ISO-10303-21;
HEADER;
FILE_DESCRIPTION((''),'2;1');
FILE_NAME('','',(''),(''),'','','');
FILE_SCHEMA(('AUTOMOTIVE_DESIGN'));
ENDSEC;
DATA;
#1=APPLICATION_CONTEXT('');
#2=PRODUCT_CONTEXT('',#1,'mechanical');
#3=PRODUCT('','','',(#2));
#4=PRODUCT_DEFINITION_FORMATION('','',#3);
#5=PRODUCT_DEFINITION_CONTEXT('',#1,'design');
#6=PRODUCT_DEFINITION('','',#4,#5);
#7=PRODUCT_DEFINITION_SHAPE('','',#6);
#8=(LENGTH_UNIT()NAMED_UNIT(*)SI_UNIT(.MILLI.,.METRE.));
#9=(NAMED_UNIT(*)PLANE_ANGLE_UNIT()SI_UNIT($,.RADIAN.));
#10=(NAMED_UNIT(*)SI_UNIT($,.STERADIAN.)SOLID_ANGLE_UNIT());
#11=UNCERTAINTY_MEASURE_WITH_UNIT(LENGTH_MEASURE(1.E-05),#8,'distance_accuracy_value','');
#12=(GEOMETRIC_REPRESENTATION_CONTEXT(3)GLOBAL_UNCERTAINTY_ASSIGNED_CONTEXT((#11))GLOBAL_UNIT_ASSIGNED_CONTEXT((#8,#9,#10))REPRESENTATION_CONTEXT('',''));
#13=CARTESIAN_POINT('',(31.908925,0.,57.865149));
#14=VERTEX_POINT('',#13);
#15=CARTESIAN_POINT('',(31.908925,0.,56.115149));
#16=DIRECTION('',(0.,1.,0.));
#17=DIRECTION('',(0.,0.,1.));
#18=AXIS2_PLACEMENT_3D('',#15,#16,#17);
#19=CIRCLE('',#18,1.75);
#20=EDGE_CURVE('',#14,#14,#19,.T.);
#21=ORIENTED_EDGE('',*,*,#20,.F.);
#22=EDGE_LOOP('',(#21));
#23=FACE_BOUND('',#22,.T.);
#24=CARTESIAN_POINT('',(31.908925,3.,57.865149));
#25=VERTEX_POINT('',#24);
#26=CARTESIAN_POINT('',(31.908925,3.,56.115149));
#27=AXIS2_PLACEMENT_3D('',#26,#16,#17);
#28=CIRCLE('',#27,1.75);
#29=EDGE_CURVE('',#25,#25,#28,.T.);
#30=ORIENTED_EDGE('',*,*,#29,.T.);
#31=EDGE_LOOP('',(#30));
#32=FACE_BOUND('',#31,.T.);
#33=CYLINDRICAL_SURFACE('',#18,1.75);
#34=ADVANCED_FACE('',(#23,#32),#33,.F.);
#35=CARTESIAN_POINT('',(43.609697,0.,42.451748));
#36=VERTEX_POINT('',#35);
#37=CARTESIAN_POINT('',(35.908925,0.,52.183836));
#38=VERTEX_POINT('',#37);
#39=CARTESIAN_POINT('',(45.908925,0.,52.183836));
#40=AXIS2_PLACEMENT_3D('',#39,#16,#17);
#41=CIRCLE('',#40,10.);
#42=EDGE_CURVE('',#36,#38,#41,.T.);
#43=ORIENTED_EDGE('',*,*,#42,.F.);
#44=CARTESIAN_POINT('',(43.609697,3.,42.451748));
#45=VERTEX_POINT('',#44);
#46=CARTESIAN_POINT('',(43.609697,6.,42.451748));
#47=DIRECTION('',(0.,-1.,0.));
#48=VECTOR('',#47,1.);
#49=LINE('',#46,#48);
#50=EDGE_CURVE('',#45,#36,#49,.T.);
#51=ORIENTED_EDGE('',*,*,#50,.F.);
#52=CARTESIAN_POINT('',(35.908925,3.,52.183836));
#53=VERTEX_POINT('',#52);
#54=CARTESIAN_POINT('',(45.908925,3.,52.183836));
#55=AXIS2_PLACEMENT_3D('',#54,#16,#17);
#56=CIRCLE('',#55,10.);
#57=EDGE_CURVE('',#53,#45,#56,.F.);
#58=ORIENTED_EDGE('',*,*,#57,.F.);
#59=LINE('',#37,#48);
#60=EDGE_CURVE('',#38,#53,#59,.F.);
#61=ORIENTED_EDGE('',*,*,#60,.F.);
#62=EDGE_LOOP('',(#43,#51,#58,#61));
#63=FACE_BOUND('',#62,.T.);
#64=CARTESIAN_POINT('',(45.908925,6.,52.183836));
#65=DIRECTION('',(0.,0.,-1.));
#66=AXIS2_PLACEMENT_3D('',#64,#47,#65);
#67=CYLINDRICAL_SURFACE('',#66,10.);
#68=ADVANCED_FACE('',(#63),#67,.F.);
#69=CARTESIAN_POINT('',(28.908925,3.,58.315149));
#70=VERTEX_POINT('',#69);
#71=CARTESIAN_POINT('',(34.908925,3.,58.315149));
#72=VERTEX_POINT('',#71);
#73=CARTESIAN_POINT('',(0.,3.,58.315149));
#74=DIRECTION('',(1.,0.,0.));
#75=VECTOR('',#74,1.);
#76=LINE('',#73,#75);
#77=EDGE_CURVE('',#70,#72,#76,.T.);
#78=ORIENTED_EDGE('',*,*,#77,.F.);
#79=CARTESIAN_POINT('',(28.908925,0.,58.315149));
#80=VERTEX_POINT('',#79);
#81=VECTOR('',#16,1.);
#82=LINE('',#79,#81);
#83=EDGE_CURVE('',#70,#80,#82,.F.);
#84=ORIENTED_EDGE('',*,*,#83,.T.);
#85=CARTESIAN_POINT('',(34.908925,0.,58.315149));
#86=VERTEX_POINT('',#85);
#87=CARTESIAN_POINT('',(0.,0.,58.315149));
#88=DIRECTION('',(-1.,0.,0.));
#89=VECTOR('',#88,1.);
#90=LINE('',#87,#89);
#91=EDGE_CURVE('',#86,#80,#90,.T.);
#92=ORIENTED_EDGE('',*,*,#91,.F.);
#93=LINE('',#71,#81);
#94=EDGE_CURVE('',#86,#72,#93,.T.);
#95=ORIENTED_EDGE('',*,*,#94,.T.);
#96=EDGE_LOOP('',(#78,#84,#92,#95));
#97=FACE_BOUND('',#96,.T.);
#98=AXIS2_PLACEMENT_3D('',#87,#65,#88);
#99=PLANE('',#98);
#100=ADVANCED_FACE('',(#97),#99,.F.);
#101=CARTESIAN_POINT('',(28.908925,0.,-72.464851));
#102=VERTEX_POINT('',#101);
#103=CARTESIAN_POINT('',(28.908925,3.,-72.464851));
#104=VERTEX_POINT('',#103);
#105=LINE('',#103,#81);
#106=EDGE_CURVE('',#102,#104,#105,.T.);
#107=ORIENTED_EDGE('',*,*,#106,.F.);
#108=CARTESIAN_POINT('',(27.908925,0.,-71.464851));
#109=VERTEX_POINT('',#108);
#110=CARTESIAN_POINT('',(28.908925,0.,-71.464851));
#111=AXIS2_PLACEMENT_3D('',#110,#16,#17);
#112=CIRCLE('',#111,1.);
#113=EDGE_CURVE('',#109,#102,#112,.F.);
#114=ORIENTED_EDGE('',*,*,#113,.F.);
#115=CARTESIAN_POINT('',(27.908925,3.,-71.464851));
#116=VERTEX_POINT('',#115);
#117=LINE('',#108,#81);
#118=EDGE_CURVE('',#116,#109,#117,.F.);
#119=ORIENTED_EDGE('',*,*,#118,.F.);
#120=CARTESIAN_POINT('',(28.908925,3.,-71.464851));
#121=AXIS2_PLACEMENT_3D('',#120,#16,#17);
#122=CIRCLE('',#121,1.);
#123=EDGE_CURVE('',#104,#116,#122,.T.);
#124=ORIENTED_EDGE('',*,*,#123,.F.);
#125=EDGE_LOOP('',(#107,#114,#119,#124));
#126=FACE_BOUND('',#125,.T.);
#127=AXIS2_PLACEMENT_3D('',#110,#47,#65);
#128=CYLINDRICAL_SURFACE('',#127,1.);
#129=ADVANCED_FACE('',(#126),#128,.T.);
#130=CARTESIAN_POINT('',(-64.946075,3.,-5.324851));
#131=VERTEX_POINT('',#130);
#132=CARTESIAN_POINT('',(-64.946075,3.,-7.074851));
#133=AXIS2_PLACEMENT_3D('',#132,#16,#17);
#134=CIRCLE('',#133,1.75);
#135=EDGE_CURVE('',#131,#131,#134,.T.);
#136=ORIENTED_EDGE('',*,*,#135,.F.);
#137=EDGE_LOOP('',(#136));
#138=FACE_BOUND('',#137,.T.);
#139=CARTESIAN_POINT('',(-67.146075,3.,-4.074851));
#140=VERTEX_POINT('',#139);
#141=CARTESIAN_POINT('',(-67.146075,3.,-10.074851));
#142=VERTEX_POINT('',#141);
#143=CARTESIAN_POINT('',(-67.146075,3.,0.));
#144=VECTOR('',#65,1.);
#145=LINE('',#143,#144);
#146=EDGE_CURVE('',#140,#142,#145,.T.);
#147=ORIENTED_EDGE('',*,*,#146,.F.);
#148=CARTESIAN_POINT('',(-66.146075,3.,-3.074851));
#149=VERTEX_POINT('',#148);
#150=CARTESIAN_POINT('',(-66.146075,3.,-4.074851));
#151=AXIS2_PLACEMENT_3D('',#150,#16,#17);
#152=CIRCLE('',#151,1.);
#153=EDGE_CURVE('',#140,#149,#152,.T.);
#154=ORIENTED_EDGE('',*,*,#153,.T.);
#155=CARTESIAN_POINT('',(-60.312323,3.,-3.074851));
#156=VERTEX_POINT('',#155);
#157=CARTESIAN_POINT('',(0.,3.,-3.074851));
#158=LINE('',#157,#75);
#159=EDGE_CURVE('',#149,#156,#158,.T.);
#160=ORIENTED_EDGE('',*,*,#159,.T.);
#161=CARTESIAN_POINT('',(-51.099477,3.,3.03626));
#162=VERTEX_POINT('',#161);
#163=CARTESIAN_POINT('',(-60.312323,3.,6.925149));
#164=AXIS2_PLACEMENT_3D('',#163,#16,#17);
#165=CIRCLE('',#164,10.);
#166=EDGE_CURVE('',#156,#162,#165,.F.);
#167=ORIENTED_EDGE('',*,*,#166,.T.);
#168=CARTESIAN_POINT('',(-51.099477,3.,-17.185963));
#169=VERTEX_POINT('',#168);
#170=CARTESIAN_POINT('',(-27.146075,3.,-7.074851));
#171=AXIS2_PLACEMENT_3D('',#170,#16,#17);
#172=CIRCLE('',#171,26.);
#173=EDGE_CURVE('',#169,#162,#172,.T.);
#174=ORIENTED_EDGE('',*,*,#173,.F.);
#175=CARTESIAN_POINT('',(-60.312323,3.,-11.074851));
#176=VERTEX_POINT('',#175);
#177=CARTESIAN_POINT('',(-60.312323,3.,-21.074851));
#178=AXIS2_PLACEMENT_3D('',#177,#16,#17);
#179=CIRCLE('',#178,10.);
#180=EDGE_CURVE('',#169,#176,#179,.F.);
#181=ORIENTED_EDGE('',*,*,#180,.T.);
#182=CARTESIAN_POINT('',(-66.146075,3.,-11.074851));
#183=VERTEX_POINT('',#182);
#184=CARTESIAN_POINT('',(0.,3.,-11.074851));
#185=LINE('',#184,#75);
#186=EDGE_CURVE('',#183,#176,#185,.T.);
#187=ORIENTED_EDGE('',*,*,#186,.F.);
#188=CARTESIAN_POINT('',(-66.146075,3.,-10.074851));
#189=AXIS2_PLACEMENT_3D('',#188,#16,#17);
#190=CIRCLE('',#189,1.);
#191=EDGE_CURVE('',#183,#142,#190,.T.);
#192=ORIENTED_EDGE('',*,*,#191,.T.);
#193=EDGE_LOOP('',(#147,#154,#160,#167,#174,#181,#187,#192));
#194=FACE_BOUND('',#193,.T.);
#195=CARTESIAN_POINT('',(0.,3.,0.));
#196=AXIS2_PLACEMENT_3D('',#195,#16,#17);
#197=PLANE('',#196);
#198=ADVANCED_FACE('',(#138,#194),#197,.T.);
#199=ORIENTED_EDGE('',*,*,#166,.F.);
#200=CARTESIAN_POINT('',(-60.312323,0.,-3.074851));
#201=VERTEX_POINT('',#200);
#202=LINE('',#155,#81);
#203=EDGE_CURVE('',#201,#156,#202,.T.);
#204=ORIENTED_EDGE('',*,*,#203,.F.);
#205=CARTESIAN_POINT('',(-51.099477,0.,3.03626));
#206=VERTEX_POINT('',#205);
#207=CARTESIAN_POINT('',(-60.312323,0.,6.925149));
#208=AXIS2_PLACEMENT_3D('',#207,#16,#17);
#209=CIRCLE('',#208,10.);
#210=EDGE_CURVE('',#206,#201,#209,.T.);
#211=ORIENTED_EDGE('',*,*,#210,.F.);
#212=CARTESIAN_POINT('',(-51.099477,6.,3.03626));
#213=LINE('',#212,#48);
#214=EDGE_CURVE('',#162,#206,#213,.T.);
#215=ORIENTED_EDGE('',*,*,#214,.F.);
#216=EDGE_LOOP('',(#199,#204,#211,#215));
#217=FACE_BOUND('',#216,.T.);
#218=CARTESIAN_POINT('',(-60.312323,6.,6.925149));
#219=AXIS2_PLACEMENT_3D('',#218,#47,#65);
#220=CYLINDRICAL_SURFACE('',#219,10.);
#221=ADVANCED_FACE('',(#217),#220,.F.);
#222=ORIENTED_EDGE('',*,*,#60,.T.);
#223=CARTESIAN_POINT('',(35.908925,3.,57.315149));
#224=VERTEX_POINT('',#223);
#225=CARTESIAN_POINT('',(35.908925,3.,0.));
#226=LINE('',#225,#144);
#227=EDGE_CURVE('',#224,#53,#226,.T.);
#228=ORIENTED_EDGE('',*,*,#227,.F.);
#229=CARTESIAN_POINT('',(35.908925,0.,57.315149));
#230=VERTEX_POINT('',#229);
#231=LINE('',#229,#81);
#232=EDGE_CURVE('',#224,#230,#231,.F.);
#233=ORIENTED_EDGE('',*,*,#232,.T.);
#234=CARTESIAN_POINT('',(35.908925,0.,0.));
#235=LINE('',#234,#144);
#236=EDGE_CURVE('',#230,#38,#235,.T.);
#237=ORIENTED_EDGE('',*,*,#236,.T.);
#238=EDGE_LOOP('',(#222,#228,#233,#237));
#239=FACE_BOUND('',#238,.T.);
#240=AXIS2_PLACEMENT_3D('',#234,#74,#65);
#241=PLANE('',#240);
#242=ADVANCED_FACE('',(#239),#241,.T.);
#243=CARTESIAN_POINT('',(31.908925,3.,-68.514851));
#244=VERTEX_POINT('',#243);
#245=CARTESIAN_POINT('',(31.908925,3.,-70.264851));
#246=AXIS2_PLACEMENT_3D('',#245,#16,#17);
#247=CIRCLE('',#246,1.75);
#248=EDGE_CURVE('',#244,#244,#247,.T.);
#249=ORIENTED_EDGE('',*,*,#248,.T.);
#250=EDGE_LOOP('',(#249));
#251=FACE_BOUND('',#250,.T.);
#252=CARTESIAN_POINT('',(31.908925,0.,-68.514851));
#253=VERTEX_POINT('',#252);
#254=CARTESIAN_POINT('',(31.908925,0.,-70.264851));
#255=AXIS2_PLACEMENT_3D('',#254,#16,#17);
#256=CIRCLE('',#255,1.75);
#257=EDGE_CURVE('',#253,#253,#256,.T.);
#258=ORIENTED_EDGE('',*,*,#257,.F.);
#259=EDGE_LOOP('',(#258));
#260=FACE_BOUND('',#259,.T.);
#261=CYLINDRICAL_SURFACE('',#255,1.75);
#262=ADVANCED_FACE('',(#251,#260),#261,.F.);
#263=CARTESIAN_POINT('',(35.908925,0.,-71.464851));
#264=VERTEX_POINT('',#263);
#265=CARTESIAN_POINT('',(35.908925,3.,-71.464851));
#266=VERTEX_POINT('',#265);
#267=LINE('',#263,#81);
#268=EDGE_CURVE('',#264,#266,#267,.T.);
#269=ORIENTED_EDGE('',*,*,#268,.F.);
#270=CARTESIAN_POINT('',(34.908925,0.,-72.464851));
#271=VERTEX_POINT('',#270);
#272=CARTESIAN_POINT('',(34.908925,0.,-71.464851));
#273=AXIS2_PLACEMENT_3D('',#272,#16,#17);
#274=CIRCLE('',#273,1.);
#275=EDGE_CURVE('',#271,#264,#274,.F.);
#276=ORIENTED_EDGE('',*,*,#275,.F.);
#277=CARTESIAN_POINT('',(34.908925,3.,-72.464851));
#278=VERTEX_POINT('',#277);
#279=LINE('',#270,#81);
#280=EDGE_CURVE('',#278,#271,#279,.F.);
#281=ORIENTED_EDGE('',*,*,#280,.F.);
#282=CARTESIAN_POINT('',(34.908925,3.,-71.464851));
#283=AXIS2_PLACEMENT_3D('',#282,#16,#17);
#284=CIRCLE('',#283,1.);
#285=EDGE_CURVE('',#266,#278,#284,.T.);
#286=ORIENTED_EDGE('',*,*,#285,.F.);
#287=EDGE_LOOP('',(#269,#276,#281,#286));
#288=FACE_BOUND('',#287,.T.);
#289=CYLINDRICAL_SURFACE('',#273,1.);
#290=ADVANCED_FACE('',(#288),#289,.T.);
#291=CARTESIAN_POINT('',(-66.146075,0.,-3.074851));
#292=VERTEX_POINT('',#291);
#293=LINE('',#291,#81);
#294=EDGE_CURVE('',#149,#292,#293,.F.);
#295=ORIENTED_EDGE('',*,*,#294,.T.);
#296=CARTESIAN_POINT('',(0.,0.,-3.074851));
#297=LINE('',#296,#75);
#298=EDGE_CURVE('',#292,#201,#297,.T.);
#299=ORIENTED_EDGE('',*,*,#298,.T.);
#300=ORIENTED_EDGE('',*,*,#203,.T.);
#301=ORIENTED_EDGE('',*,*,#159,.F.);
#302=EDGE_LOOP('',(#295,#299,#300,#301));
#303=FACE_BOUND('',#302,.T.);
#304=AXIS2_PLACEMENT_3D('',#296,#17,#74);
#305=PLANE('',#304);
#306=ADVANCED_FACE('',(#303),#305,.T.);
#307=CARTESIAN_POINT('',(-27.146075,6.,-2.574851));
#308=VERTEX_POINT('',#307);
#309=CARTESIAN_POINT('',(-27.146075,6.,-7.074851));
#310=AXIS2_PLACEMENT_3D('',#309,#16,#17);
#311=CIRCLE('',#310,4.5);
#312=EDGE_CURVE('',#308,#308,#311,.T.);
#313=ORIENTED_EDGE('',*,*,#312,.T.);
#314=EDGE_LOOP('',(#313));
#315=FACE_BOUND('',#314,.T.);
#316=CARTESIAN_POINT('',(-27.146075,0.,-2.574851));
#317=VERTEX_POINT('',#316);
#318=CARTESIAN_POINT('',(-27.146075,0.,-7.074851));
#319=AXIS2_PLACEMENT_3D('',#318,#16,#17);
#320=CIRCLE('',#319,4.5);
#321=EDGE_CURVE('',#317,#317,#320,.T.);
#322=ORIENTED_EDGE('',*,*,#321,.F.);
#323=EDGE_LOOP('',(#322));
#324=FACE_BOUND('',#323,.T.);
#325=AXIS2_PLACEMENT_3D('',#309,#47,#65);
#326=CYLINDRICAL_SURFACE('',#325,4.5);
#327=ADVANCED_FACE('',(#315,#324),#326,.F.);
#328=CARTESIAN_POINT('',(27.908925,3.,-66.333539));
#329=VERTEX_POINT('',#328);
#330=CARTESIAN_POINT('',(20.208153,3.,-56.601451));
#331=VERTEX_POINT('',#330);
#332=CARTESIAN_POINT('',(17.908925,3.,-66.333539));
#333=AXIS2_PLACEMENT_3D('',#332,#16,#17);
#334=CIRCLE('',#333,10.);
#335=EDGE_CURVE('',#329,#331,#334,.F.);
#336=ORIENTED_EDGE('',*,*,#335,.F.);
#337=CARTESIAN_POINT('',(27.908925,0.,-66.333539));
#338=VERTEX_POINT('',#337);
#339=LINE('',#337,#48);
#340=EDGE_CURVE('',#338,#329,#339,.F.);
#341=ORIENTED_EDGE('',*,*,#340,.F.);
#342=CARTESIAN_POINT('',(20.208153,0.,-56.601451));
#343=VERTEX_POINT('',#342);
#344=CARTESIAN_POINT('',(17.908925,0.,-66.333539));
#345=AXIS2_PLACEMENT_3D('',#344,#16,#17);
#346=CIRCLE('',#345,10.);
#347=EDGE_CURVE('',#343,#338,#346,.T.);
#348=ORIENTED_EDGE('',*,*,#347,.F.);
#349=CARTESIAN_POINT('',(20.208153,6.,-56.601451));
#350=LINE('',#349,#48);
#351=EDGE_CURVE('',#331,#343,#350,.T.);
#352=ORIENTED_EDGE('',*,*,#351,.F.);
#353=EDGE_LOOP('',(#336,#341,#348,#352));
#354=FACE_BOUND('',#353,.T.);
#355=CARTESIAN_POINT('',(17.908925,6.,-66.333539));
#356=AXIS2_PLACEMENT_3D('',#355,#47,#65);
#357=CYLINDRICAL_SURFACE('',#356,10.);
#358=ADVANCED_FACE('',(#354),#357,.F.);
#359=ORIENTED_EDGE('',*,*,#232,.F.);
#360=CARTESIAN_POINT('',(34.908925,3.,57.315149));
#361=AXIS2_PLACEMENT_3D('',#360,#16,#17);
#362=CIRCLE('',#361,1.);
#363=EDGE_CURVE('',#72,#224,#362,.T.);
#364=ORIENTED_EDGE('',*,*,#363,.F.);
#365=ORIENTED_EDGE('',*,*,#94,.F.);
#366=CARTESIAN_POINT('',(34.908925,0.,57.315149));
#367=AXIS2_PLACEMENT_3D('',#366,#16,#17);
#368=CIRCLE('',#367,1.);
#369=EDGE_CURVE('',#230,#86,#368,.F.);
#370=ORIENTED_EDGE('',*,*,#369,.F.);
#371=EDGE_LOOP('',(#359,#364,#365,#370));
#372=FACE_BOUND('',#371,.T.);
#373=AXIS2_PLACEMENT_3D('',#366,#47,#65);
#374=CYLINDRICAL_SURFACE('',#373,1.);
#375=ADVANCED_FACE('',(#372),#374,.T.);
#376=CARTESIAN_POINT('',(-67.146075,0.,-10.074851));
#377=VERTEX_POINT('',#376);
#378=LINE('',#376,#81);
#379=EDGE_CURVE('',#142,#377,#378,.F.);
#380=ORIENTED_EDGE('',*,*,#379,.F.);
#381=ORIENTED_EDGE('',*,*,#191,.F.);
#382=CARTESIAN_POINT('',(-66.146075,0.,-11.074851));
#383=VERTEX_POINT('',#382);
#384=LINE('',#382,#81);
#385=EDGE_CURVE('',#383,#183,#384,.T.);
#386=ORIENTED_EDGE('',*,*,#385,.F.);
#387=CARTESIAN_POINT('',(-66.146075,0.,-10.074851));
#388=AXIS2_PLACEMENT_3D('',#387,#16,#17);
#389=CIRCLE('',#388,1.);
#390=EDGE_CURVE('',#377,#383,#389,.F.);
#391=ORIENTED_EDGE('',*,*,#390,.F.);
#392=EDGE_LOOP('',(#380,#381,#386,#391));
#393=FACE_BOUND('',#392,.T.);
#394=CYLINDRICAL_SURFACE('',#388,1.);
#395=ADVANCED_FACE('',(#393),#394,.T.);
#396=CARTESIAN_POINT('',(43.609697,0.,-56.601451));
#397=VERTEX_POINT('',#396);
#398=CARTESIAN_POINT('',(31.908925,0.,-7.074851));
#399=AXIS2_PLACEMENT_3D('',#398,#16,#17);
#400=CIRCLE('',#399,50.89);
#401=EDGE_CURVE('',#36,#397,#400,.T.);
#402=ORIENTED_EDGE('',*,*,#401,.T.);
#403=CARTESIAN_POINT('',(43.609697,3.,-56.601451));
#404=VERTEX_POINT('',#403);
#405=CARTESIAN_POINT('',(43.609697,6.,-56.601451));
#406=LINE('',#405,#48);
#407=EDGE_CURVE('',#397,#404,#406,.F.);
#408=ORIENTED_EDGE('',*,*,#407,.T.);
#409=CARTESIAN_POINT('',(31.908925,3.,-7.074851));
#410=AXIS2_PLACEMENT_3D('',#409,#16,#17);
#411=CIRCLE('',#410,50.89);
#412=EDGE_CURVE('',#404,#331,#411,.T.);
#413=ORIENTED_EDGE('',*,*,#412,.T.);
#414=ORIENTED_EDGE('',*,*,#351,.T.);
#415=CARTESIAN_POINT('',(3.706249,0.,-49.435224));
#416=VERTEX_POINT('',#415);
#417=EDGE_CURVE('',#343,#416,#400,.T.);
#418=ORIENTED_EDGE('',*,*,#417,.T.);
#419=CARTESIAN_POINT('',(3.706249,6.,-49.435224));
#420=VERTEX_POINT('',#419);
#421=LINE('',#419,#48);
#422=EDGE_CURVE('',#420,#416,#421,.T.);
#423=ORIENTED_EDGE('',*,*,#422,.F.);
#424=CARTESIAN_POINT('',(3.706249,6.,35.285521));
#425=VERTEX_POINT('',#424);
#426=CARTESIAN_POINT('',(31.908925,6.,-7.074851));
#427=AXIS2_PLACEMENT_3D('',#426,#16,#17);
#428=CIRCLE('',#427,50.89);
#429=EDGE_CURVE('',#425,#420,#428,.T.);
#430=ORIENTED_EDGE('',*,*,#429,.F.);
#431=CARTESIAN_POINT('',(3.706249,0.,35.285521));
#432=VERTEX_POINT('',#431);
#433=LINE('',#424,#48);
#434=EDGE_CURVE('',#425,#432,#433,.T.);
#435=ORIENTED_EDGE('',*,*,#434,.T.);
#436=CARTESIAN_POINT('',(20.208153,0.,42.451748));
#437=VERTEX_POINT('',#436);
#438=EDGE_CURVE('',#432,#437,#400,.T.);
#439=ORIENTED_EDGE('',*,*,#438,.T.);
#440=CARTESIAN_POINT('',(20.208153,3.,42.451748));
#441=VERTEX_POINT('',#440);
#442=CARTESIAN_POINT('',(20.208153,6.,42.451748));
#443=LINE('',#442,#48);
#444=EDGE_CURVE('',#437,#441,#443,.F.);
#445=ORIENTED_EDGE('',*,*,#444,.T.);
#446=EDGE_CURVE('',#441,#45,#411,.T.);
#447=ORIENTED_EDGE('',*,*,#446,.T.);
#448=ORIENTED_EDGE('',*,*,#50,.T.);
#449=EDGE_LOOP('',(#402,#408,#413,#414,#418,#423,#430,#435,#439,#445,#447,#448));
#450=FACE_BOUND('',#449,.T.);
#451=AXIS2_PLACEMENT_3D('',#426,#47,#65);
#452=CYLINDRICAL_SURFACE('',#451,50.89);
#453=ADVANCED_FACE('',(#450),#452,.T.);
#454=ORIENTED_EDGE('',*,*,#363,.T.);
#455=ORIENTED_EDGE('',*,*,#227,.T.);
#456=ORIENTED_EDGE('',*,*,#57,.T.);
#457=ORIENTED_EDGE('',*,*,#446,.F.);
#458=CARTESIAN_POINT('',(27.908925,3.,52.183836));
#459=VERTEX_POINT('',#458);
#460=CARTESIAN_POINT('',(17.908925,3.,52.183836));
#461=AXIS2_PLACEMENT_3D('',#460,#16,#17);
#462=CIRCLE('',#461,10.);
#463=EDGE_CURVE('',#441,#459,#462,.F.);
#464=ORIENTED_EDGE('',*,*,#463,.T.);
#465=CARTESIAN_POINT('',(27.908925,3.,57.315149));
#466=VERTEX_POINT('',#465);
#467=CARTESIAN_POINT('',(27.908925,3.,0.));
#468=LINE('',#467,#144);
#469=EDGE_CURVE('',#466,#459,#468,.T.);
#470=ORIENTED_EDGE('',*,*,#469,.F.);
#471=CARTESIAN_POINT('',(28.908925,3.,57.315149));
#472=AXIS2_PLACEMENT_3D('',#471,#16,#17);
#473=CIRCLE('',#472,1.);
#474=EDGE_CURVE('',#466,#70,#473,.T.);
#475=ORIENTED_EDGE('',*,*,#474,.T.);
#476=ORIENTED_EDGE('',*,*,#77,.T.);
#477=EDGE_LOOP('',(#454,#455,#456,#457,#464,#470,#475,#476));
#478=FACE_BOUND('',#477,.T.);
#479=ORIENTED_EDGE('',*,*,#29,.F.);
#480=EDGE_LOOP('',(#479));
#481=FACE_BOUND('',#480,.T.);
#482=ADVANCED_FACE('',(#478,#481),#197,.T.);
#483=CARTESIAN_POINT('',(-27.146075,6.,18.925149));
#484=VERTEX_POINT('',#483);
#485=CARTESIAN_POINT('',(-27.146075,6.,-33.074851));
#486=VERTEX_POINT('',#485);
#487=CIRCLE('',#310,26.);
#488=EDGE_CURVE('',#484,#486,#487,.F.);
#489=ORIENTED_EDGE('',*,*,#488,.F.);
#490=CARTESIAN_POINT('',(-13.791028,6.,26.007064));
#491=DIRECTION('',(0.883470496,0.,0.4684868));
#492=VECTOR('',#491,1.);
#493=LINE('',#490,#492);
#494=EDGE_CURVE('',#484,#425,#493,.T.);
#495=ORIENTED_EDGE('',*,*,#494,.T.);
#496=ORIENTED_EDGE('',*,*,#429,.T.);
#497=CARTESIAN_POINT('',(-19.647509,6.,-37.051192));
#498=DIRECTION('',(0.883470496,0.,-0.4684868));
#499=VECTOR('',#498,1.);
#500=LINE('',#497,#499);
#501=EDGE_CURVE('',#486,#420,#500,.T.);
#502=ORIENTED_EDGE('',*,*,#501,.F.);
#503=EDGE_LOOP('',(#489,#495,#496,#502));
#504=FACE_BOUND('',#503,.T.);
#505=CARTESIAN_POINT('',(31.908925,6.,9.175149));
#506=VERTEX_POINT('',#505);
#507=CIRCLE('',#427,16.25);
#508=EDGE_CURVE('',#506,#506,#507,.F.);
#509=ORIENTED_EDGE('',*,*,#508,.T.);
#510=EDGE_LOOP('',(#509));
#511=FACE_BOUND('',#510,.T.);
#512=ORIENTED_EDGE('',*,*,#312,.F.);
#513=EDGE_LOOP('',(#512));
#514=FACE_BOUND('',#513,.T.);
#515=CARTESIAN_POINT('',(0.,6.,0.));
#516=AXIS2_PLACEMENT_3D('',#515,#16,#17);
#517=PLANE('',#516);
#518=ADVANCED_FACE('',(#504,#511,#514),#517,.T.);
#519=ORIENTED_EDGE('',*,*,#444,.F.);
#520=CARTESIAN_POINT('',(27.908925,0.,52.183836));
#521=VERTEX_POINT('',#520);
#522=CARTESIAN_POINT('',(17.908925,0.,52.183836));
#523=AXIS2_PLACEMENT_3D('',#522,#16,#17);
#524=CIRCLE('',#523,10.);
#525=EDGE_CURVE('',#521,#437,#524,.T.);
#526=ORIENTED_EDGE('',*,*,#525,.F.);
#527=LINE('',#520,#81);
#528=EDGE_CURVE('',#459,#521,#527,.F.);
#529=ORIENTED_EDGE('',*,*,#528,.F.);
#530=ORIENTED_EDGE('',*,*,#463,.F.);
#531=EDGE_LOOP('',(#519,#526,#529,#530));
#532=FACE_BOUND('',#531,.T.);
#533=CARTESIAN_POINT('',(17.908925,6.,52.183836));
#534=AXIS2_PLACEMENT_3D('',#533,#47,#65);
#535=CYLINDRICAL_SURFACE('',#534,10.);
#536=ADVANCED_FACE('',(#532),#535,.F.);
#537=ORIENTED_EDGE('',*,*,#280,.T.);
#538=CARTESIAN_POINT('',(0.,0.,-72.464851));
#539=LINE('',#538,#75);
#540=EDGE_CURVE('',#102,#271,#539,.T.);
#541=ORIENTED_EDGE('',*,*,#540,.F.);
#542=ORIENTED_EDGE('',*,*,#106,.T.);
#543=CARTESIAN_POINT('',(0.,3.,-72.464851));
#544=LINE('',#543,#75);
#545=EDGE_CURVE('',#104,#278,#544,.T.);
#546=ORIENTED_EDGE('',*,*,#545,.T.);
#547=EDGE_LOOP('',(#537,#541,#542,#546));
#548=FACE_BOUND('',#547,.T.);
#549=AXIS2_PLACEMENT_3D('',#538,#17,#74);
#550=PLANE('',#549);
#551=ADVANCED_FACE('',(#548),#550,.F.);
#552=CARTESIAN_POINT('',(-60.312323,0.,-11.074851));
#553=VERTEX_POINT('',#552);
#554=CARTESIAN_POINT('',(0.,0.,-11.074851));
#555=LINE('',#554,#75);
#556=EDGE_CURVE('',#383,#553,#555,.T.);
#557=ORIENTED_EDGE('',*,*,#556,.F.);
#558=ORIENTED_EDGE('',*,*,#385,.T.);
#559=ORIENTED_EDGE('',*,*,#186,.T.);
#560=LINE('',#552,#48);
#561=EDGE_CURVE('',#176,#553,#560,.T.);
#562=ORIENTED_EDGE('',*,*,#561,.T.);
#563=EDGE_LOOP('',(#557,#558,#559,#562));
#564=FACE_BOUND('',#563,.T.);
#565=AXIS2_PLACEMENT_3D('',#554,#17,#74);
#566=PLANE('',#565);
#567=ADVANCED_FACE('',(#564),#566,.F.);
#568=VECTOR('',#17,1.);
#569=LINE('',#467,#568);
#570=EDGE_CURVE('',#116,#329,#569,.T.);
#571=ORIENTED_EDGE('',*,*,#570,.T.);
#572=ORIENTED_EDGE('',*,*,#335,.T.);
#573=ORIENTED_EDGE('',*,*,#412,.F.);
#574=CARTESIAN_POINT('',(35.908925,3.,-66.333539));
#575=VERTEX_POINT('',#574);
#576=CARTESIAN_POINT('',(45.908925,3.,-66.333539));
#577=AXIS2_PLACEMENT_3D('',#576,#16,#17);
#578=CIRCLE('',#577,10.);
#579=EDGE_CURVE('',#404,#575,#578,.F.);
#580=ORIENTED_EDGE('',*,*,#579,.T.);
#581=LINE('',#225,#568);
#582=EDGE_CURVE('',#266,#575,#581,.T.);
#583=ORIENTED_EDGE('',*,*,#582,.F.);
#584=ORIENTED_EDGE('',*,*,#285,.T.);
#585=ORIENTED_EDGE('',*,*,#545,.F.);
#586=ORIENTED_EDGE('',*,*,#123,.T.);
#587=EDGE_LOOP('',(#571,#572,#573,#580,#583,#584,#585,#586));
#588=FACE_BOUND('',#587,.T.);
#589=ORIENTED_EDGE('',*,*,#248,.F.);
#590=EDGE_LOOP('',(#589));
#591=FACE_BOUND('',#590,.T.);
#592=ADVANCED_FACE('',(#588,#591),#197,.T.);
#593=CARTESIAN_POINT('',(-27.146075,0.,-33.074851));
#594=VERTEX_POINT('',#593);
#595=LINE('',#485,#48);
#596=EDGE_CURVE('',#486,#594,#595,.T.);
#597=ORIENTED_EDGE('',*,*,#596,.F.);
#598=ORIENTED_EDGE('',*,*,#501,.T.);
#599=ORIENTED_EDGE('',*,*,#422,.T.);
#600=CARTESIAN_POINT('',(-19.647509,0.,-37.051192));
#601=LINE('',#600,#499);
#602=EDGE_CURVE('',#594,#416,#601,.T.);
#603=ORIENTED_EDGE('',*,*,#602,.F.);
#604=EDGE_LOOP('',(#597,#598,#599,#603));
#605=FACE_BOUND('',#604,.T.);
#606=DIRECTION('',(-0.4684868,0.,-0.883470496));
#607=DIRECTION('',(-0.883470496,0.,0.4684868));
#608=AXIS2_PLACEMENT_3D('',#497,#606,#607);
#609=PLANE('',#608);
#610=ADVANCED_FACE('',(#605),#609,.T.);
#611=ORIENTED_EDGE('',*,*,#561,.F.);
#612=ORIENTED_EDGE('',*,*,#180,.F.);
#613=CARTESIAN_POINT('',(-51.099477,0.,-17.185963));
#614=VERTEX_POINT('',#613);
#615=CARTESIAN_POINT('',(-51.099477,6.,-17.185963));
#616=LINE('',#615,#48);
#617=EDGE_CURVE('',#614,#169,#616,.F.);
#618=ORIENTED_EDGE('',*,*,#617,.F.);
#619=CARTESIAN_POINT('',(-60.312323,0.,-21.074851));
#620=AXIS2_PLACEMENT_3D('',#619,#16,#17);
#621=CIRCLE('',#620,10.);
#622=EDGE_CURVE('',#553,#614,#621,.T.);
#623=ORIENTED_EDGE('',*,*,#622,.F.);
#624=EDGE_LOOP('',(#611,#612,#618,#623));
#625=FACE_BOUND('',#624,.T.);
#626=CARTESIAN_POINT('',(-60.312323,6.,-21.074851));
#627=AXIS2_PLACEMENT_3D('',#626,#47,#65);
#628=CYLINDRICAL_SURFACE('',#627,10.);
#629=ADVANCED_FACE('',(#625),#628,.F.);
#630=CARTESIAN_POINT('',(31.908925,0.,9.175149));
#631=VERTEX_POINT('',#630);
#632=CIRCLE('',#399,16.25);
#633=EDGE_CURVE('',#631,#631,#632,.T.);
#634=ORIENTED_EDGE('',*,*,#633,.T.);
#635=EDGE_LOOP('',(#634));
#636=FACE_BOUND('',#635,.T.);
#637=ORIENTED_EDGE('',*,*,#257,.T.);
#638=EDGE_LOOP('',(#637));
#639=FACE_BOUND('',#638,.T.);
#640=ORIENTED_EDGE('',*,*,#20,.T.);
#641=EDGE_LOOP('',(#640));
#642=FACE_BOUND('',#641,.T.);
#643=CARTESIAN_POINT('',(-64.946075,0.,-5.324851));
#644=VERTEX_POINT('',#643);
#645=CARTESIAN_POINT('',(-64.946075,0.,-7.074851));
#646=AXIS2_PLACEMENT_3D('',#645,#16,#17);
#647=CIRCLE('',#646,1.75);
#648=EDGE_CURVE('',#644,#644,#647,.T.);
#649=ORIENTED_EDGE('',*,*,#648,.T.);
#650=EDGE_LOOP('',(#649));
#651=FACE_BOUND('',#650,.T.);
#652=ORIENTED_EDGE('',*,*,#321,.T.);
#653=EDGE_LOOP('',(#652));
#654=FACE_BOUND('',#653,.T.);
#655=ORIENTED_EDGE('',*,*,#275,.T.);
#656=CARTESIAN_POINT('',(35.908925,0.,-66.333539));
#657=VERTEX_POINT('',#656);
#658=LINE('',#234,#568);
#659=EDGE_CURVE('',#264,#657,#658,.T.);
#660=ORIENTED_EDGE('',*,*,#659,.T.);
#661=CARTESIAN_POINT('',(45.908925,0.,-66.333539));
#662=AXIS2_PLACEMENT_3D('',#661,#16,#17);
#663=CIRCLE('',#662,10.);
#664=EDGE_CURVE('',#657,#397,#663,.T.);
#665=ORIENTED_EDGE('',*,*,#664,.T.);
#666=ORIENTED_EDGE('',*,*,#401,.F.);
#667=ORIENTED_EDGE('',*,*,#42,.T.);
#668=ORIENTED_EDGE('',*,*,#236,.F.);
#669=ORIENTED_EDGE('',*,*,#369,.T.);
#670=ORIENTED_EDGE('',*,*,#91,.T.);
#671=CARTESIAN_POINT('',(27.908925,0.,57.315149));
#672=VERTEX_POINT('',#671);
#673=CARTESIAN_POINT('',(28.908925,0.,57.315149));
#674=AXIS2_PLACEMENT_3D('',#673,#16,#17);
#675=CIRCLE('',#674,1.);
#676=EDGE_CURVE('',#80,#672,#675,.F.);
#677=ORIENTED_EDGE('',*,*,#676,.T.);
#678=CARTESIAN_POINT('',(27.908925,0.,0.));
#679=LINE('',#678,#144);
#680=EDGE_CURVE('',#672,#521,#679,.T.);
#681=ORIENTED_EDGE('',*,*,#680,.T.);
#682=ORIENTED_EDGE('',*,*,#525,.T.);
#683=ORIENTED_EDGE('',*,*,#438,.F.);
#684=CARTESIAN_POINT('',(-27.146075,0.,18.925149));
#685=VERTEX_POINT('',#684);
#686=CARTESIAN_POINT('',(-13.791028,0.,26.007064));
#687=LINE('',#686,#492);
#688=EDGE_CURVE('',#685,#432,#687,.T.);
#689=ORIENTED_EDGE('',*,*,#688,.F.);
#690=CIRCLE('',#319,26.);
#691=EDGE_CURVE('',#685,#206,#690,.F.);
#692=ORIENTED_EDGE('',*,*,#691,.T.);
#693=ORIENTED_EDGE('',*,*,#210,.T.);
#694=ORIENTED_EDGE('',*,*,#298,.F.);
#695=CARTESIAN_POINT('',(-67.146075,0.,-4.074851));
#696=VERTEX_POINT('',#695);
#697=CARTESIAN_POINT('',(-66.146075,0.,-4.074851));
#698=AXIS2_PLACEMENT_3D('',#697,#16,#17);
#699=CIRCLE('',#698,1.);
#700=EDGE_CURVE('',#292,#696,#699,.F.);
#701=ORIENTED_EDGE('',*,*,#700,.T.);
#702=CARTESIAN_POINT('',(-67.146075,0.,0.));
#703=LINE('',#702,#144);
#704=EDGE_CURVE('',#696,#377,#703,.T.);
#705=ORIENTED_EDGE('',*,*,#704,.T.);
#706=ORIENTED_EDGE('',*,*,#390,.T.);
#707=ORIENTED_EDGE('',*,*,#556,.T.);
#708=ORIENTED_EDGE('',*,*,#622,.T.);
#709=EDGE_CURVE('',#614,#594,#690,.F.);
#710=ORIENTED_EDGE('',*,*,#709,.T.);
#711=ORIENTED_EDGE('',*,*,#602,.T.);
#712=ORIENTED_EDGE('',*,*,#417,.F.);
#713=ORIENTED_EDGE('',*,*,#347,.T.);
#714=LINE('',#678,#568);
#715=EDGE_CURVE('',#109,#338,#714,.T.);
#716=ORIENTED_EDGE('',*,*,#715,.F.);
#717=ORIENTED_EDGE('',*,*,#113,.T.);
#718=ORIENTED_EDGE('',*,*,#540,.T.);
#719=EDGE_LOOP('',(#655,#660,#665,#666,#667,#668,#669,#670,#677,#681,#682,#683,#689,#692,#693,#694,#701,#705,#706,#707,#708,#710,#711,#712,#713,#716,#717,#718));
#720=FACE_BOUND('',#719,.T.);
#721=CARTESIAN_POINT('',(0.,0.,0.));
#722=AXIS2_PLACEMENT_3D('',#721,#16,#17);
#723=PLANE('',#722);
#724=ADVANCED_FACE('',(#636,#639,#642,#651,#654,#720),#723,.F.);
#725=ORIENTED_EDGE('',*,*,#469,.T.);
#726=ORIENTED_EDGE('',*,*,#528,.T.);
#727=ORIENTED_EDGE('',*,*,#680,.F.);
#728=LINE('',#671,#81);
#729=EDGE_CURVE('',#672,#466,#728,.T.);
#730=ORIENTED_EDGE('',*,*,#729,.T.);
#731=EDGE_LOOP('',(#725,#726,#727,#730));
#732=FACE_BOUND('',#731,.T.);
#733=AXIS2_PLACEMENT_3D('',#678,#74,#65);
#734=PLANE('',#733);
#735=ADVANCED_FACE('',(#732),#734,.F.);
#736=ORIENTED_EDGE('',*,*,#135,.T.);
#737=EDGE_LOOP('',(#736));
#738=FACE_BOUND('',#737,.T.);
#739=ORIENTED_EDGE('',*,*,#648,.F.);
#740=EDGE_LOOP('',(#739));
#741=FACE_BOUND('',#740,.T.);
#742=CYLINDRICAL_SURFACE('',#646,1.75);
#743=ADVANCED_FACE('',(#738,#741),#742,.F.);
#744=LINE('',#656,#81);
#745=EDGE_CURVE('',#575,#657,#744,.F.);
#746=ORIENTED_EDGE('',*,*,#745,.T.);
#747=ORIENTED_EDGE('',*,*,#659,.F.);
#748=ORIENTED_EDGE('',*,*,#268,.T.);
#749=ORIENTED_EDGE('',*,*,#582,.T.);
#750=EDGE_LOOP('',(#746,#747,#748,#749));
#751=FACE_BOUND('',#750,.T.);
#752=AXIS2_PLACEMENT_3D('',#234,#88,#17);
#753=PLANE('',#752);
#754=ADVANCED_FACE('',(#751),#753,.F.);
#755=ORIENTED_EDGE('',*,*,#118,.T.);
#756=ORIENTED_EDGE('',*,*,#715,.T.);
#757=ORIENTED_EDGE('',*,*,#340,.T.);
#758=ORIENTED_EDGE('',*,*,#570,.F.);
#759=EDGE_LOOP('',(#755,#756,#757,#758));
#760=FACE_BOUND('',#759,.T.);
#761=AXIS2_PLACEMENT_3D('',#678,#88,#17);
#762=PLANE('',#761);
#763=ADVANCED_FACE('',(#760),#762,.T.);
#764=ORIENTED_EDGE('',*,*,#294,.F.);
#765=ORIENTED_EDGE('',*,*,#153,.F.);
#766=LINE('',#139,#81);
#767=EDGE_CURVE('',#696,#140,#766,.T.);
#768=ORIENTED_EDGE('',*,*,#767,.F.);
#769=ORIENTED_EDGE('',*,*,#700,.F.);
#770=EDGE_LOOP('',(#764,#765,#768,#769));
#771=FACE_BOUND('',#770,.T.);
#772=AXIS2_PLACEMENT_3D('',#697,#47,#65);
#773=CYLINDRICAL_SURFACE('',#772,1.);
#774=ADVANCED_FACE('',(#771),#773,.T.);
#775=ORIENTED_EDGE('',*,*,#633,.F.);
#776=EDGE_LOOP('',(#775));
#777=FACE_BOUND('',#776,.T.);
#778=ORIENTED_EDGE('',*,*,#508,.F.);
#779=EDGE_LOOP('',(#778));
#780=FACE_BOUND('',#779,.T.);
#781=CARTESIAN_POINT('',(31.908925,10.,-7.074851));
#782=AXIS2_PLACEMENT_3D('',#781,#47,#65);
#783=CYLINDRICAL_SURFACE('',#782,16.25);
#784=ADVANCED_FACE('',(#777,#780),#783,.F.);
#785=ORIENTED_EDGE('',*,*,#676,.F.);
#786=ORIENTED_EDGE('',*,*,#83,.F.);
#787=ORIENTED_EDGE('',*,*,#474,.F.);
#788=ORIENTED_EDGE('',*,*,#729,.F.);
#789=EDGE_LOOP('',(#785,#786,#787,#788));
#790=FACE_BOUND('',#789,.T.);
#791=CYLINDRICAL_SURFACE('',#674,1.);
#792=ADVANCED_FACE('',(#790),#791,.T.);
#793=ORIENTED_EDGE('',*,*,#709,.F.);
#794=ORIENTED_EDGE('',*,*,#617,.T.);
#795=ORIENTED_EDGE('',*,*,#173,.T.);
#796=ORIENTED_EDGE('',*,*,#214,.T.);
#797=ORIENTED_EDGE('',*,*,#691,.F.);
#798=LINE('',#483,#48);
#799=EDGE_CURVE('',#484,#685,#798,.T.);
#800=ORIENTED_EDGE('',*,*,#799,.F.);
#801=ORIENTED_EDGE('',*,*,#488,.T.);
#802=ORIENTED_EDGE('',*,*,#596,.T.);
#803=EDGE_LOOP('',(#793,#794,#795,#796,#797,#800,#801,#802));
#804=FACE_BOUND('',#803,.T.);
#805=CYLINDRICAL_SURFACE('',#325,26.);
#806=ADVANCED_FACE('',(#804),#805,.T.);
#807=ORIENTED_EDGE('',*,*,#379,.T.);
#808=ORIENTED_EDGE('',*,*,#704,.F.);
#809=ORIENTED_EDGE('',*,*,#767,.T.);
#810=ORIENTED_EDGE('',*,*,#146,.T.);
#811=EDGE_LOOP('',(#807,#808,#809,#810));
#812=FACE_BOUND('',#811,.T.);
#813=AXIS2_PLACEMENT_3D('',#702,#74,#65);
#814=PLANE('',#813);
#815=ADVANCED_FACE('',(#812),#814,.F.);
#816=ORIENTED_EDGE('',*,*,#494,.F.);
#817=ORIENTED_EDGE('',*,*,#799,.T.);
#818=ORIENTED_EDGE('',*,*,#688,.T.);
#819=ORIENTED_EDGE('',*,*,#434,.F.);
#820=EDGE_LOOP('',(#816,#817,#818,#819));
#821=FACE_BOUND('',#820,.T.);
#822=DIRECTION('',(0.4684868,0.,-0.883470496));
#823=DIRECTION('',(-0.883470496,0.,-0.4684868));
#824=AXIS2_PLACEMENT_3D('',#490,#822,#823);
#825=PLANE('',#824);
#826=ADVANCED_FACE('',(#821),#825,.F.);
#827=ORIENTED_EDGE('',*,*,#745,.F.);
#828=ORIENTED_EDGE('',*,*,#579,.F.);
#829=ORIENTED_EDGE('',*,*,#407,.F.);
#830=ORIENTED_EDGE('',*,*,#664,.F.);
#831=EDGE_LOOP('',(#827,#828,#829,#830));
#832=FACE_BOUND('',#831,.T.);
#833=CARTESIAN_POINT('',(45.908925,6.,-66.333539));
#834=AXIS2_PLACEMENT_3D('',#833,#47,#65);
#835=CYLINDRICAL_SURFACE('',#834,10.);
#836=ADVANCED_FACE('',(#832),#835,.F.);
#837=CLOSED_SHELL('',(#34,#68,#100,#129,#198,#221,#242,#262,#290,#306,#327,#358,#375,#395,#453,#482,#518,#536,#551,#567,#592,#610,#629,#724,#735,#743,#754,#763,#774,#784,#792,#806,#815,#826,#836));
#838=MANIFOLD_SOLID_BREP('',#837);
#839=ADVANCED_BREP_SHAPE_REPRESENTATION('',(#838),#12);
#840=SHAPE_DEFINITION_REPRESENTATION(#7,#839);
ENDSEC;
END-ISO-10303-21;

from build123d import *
from build123d.topology import SkipClean

# Parameters (mm, degrees)
SKETCH1_R           = 4.5
BOSS_EXTRUDE1_DEPTH = 6
BOSS_EXTRUDE5_DEPTH = 6
BOSS_EXTRUDE3_START = -6
BOSS_EXTRUDE3_DEPTH = 6
CUT_EXTRUDE1_START  = -3
CUT_EXTRUDE1_DEPTH  = 3
BOSS_EXTRUDE4_START = -6
BOSS_EXTRUDE4_DEPTH = 6
CUT_EXTRUDE2_START  = -3
CUT_EXTRUDE2_DEPTH  = 3
BOSS_EXTRUDE7_START = -3
BOSS_EXTRUDE7_DEPTH = 3
BOSS_EXTRUDE9_START = -6
BOSS_EXTRUDE9_DEPTH = 6
CUT_EXTRUDE4_START  = -3
CUT_EXTRUDE4_DEPTH  = 3
FILLET1_R           = 1
FILLET2_R           = 10
CUT_EXTRUDE5_START  = -6
CUT_EXTRUDE5_DEPTH  = 6
SKETCH1_6_R         = 16.25
SKETCH1_6_R_2       = 4.5
CUT_EXTRUDE8_DEPTH  = 10


with BuildPart() as part:
    # Sketch1 → Boss-Extrude1 (new body)
    with BuildSketch(Plane(origin=(0, 0, 0), x_dir=(1, 0, 0), z_dir=(0, 1, 0))):
        with BuildLine():
            Line((3.706249193, 49.435224426), (-27.146075319, 33.07485149))
            ThreePointArc((-27.146075319, 33.07485149), (-53.146075319, 7.07485149), (-27.146075319, -18.92514851))
            Line((-27.146075319, -18.92514851), (3.706249193, -35.285521446))
            ThreePointArc((3.706249193, -35.285521446), (82.798924681, 7.07485149), (3.706249193, 49.435224426))
        make_face()
        with Locations(Location((-27.146075319, 7.07485149, 0), (0, 0, 270))):
            Circle(SKETCH1_R, mode=Mode.SUBTRACT)
    extrude(amount=BOSS_EXTRUDE1_DEPTH)

    # Sketch1<3> → Boss-Extrude5 (add)
    with BuildSketch(Plane(origin=(0, 0, 0), x_dir=(1, 0, 0), z_dir=(0, 1, 0))):
        with BuildLine():
            ThreePointArc((-16.299337932, -9.227158073), (-13.7342993, -15.430441322), (-10.375107984, -21.242151909))
            Line((-10.375107984, -21.242151909), (3.706249193, -27.385705604))
            ThreePointArc((3.706249193, -27.385705604), (-5.156108472, -17.605185328), (-10.76229626, -5.656519346))
            ThreePointArc((-10.76229626, -5.656519346), (-12.682785992, -8.75689294), (-16.299337932, -9.227158073))
        make_face()
    extrude(amount=BOSS_EXTRUDE5_DEPTH)

    # Sketch2 → Boss-Extrude3 (add)
    with BuildSketch(Plane(origin=(0, 6, 0), x_dir=(1, 0, 0), z_dir=(0, 1, 0)).offset(BOSS_EXTRUDE3_START)):
        with BuildLine():
            ThreePointArc((-53.146075319, 7.07485149), (-53.068576106, 9.080830791), (-52.836540476, 11.07485149))
            Line((-52.836540476, 11.07485149), (-67.146075316, 11.07485149))
            Line((-67.146075316, 11.07485149), (-67.146075316, 7.07485149))
            Line((-67.146075316, 7.07485149), (-66.696075316, 7.07485149))
            ThreePointArc((-66.696075316, 7.07485149), (-64.946075316, 8.82485149), (-63.196075316, 7.07485149))
            Line((-63.196075316, 7.07485149), (-53.146075319, 7.07485149))
        make_face()
        with BuildLine():
            ThreePointArc((-52.836540476, 3.07485149), (-53.068576106, 5.06887219), (-53.146075319, 7.07485149))
            Line((-53.146075319, 7.07485149), (-63.196075316, 7.07485149))
            ThreePointArc((-63.196075316, 7.07485149), (-64.946075316, 5.32485149), (-66.696075316, 7.07485149))
            Line((-66.696075316, 7.07485149), (-67.146075316, 7.07485149))
            Line((-67.146075316, 7.07485149), (-67.146075316, 3.07485149))
            Line((-67.146075316, 3.07485149), (-52.836540476, 3.07485149))
        make_face()
        with BuildLine():
            Line((97.688924678, 11.07485149), (82.641479318, 11.07485149))
            ThreePointArc((82.641479318, 11.07485149), (82.759548106, 9.076400206), (82.798924681, 7.07485149))
            Line((82.798924681, 7.07485149), (93.738924678, 7.07485149))
            ThreePointArc((93.738924678, 7.07485149), (95.488924678, 8.82485149), (97.238924678, 7.07485149))
            Line((97.238924678, 7.07485149), (97.688924678, 7.07485149))
            Line((97.688924678, 7.07485149), (97.688924678, 11.07485149))
        make_face()
        with BuildLine():
            Line((93.738924678, 7.07485149), (82.798924681, 7.07485149))
            ThreePointArc((82.798924681, 7.07485149), (82.759548106, 5.073302775), (82.641479318, 3.07485149))
            Line((82.641479318, 3.07485149), (97.688924678, 3.07485149))
            Line((97.688924678, 3.07485149), (97.688924678, 7.07485149))
            Line((97.688924678, 7.07485149), (97.238924678, 7.07485149))
            ThreePointArc((97.238924678, 7.07485149), (95.488924678, 5.32485149), (93.738924678, 7.07485149))
        make_face()
    extrude(amount=BOSS_EXTRUDE3_DEPTH)

    # Sketch2<11> → Cut-Extrude1 (cut)
    with SkipClean():  # the faces are left unmerged after this step: merging them gives an invalid solid
        with BuildSketch(Plane(origin=(0, 6, 0), x_dir=(1, 0, 0), z_dir=(0, 1, 0)).offset(CUT_EXTRUDE1_START)):
            with BuildLine():
                ThreePointArc((-52.836540476, 3.07485149), (-53.068576106, 5.06887219), (-53.146075319, 7.07485149))
                Line((-53.146075319, 7.07485149), (-63.196075316, 7.07485149))
                ThreePointArc((-63.196075316, 7.07485149), (-64.946075316, 5.32485149), (-66.696075316, 7.07485149))
                Line((-66.696075316, 7.07485149), (-67.146075316, 7.07485149))
                Line((-67.146075316, 7.07485149), (-67.146075316, 3.07485149))
                Line((-67.146075316, 3.07485149), (-52.836540476, 3.07485149))
            make_face()
            with BuildLine():
                ThreePointArc((-53.146075319, 7.07485149), (-53.068576106, 9.080830791), (-52.836540476, 11.07485149))
                Line((-52.836540476, 11.07485149), (-67.146075316, 11.07485149))
                Line((-67.146075316, 11.07485149), (-67.146075316, 7.07485149))
                Line((-67.146075316, 7.07485149), (-66.696075316, 7.07485149))
                ThreePointArc((-66.696075316, 7.07485149), (-64.946075316, 8.82485149), (-63.196075316, 7.07485149))
                Line((-63.196075316, 7.07485149), (-53.146075319, 7.07485149))
            make_face()
        extrude(amount=CUT_EXTRUDE1_DEPTH, mode=Mode.SUBTRACT)

    # Sketch2<13> → Boss-Extrude4 (add)
    with SkipClean():  # the faces are left unmerged after this step: merging them gives an invalid solid
        with BuildSketch(Plane(origin=(0, 6, 0), x_dir=(1, 0, 0), z_dir=(0, 1, 0)).offset(BOSS_EXTRUDE4_START)):
            with BuildLine():
                Line((93.738924678, 7.07485149), (82.798924681, 7.07485149))
                ThreePointArc((82.798924681, 7.07485149), (82.759548106, 5.073302775), (82.641479318, 3.07485149))
                Line((82.641479318, 3.07485149), (97.688924678, 3.07485149))
                Line((97.688924678, 3.07485149), (97.688924678, 7.07485149))
                Line((97.688924678, 7.07485149), (97.238924678, 7.07485149))
                ThreePointArc((97.238924678, 7.07485149), (95.488924678, 5.32485149), (93.738924678, 7.07485149))
            make_face()
            with BuildLine():
                Line((97.688924678, 11.07485149), (82.641479318, 11.07485149))
                ThreePointArc((82.641479318, 11.07485149), (82.759548106, 9.076400206), (82.798924681, 7.07485149))
                Line((82.798924681, 7.07485149), (93.738924678, 7.07485149))
                ThreePointArc((93.738924678, 7.07485149), (95.488924678, 8.82485149), (97.238924678, 7.07485149))
                Line((97.238924678, 7.07485149), (97.688924678, 7.07485149))
                Line((97.688924678, 7.07485149), (97.688924678, 11.07485149))
            make_face()
        extrude(amount=BOSS_EXTRUDE4_DEPTH)

    # Sketch2<15> → Cut-Extrude2 (cut)
    with SkipClean():  # the faces are left unmerged after this step: merging them gives an invalid solid
        with BuildSketch(Plane(origin=(0, 6, 0), x_dir=(1, 0, 0), z_dir=(0, 1, 0)).offset(CUT_EXTRUDE2_START)):
            with BuildLine():
                Line((93.738924678, 7.07485149), (82.798924681, 7.07485149))
                ThreePointArc((82.798924681, 7.07485149), (82.759548106, 5.073302775), (82.641479318, 3.07485149))
                Line((82.641479318, 3.07485149), (97.688924678, 3.07485149))
                Line((97.688924678, 3.07485149), (97.688924678, 7.07485149))
                Line((97.688924678, 7.07485149), (97.238924678, 7.07485149))
                ThreePointArc((97.238924678, 7.07485149), (95.488924678, 5.32485149), (93.738924678, 7.07485149))
            make_face()
            with BuildLine():
                Line((97.688924678, 11.07485149), (82.641479318, 11.07485149))
                ThreePointArc((82.641479318, 11.07485149), (82.759548106, 9.076400206), (82.798924681, 7.07485149))
                Line((82.798924681, 7.07485149), (93.738924678, 7.07485149))
                ThreePointArc((93.738924678, 7.07485149), (95.488924678, 8.82485149), (97.238924678, 7.07485149))
                Line((97.238924678, 7.07485149), (97.688924678, 7.07485149))
                Line((97.688924678, 7.07485149), (97.688924678, 11.07485149))
            make_face()
        extrude(amount=CUT_EXTRUDE2_DEPTH, mode=Mode.SUBTRACT)

    # Sketch2<16> → Boss-Extrude7 (add)
    with BuildSketch(Plane(origin=(0, 6, 0), x_dir=(1, 0, 0), z_dir=(0, 1, 0)).offset(BOSS_EXTRUDE7_START)):
        with BuildLine():
            Line((93.738924678, 7.07485149), (82.798924681, 7.07485149))
            ThreePointArc((82.798924681, 7.07485149), (82.759548106, 5.073302775), (82.641479318, 3.07485149))
            Line((82.641479318, 3.07485149), (97.688924678, 3.07485149))
            Line((97.688924678, 3.07485149), (97.688924678, 7.07485149))
            Line((97.688924678, 7.07485149), (97.238924678, 7.07485149))
            ThreePointArc((97.238924678, 7.07485149), (95.488924678, 5.32485149), (93.738924678, 7.07485149))
        make_face()
        with BuildLine():
            Line((97.688924678, 11.07485149), (82.641479318, 11.07485149))
            ThreePointArc((82.641479318, 11.07485149), (82.759548106, 9.076400206), (82.798924681, 7.07485149))
            Line((82.798924681, 7.07485149), (93.738924678, 7.07485149))
            ThreePointArc((93.738924678, 7.07485149), (95.488924678, 8.82485149), (97.238924678, 7.07485149))
            Line((97.238924678, 7.07485149), (97.688924678, 7.07485149))
            Line((97.688924678, 7.07485149), (97.688924678, 11.07485149))
        make_face()
        with BuildLine():
            ThreePointArc((-53.146075319, 7.07485149), (-53.068576106, 9.080830791), (-52.836540476, 11.07485149))
            Line((-52.836540476, 11.07485149), (-67.146075316, 11.07485149))
            Line((-67.146075316, 11.07485149), (-67.146075316, 7.07485149))
            Line((-67.146075316, 7.07485149), (-66.696075316, 7.07485149))
            ThreePointArc((-66.696075316, 7.07485149), (-64.946075316, 8.82485149), (-63.196075316, 7.07485149))
            Line((-63.196075316, 7.07485149), (-53.146075319, 7.07485149))
        make_face()
        with BuildLine():
            ThreePointArc((-52.836540476, 3.07485149), (-53.068576106, 5.06887219), (-53.146075319, 7.07485149))
            Line((-53.146075319, 7.07485149), (-63.196075316, 7.07485149))
            ThreePointArc((-63.196075316, 7.07485149), (-64.946075316, 5.32485149), (-66.696075316, 7.07485149))
            Line((-66.696075316, 7.07485149), (-67.146075316, 7.07485149))
            Line((-67.146075316, 7.07485149), (-67.146075316, 3.07485149))
            Line((-67.146075316, 3.07485149), (-52.836540476, 3.07485149))
        make_face()
    extrude(amount=BOSS_EXTRUDE7_DEPTH)

    # Sketch2<19> → Boss-Extrude9 (add)
    with BuildSketch(Plane(origin=(0, 6, 0), x_dir=(1, 0, 0), z_dir=(0, 1, 0)).offset(BOSS_EXTRUDE9_START)):
        with BuildLine():
            ThreePointArc((31.908924681, -43.81514851), (29.907375966, -43.775771935), (27.908924681, -43.657703147))
            Line((27.908924681, -43.657703147), (27.908924681, -58.31514851))
            Line((27.908924681, -58.31514851), (31.908924681, -58.31514851))
            Line((31.908924681, -58.31514851), (31.908924681, -57.86514851))
            ThreePointArc((31.908924681, -57.86514851), (30.158924681, -56.11514851), (31.908924681, -54.36514851))
            Line((31.908924681, -54.36514851), (31.908924681, -43.81514851))
        make_face()
        with BuildLine():
            ThreePointArc((35.908924681, -43.657703147), (33.910473397, -43.775771935), (31.908924681, -43.81514851))
            Line((31.908924681, -43.81514851), (31.908924681, -54.36514851))
            ThreePointArc((31.908924681, -54.36514851), (33.146361548, -54.877711643), (33.658924681, -56.11514851))
            ThreePointArc((33.658924681, -56.11514851), (33.146361548, -57.352585377), (31.908924681, -57.86514851))
            Line((31.908924681, -57.86514851), (31.908924681, -58.31514851))
            Line((31.908924681, -58.31514851), (35.908924681, -58.31514851))
            Line((35.908924681, -58.31514851), (35.908924681, -43.657703147))
        make_face()
        with BuildLine():
            Line((31.908924681, 68.51485149), (31.908924681, 57.96485149))
            ThreePointArc((31.908924681, 57.96485149), (33.910473397, 57.925474916), (35.908924681, 57.807406127))
            Line((35.908924681, 57.807406127), (35.908924681, 72.46485149))
            Line((35.908924681, 72.46485149), (31.908924681, 72.46485149))
            Line((31.908924681, 72.46485149), (31.908924681, 72.01485149))
            ThreePointArc((31.908924681, 72.01485149), (33.146361548, 71.502288357), (33.658924681, 70.26485149))
            ThreePointArc((33.658924681, 70.26485149), (33.146361548, 69.027414623), (31.908924681, 68.51485149))
        make_face()
        with BuildLine():
            Line((27.908924681, 72.46485149), (27.908924681, 57.807406127))
            ThreePointArc((27.908924681, 57.807406127), (29.907375966, 57.925474916), (31.908924681, 57.96485149))
            Line((31.908924681, 57.96485149), (31.908924681, 68.51485149))
            ThreePointArc((31.908924681, 68.51485149), (30.158924681, 70.26485149), (31.908924681, 72.01485149))
            Line((31.908924681, 72.01485149), (31.908924681, 72.46485149))
            Line((31.908924681, 72.46485149), (27.908924681, 72.46485149))
        make_face()
    extrude(amount=BOSS_EXTRUDE9_DEPTH)

    # Sketch2<22> → Cut-Extrude4 (cut)
    with SkipClean():  # the faces are left unmerged after this step: merging them gives an invalid solid
        with BuildSketch(Plane(origin=(0, 6, 0), x_dir=(1, 0, 0), z_dir=(0, 1, 0)).offset(CUT_EXTRUDE4_START)):
            with BuildLine():
                ThreePointArc((35.908924681, -43.657703147), (33.910473397, -43.775771935), (31.908924681, -43.81514851))
                Line((31.908924681, -43.81514851), (31.908924681, -54.36514851))
                ThreePointArc((31.908924681, -54.36514851), (33.146361548, -54.877711643), (33.658924681, -56.11514851))
                ThreePointArc((33.658924681, -56.11514851), (33.146361548, -57.352585377), (31.908924681, -57.86514851))
                Line((31.908924681, -57.86514851), (31.908924681, -58.31514851))
                Line((31.908924681, -58.31514851), (35.908924681, -58.31514851))
                Line((35.908924681, -58.31514851), (35.908924681, -43.657703147))
            make_face()
            with BuildLine():
                ThreePointArc((31.908924681, -43.81514851), (29.907375966, -43.775771935), (27.908924681, -43.657703147))
                Line((27.908924681, -43.657703147), (27.908924681, -58.31514851))
                Line((27.908924681, -58.31514851), (31.908924681, -58.31514851))
                Line((31.908924681, -58.31514851), (31.908924681, -57.86514851))
                ThreePointArc((31.908924681, -57.86514851), (30.158924681, -56.11514851), (31.908924681, -54.36514851))
                Line((31.908924681, -54.36514851), (31.908924681, -43.81514851))
            make_face()
            with BuildLine():
                Line((31.908924681, 68.51485149), (31.908924681, 57.96485149))
                ThreePointArc((31.908924681, 57.96485149), (33.910473397, 57.925474916), (35.908924681, 57.807406127))
                Line((35.908924681, 57.807406127), (35.908924681, 72.46485149))
                Line((35.908924681, 72.46485149), (31.908924681, 72.46485149))
                Line((31.908924681, 72.46485149), (31.908924681, 72.01485149))
                ThreePointArc((31.908924681, 72.01485149), (33.146361548, 71.502288357), (33.658924681, 70.26485149))
                ThreePointArc((33.658924681, 70.26485149), (33.146361548, 69.027414623), (31.908924681, 68.51485149))
            make_face()
            with BuildLine():
                Line((27.908924681, 72.46485149), (27.908924681, 57.807406127))
                ThreePointArc((27.908924681, 57.807406127), (29.907375966, 57.925474916), (31.908924681, 57.96485149))
                Line((31.908924681, 57.96485149), (31.908924681, 68.51485149))
                ThreePointArc((31.908924681, 68.51485149), (30.158924681, 70.26485149), (31.908924681, 72.01485149))
                Line((31.908924681, 72.01485149), (31.908924681, 72.46485149))
                Line((31.908924681, 72.46485149), (27.908924681, 72.46485149))
            make_face()
            with BuildLine():
                ThreePointArc((-53.146075319, 7.07485149), (-53.068576106, 9.080830791), (-52.836540476, 11.07485149))
                Line((-52.836540476, 11.07485149), (-67.146075316, 11.07485149))
                Line((-67.146075316, 11.07485149), (-67.146075316, 7.07485149))
                Line((-67.146075316, 7.07485149), (-66.696075316, 7.07485149))
                ThreePointArc((-66.696075316, 7.07485149), (-64.946075316, 8.82485149), (-63.196075316, 7.07485149))
                Line((-63.196075316, 7.07485149), (-53.146075319, 7.07485149))
            make_face()
            with BuildLine():
                ThreePointArc((-52.836540476, 3.07485149), (-53.068576106, 5.06887219), (-53.146075319, 7.07485149))
                Line((-53.146075319, 7.07485149), (-63.196075316, 7.07485149))
                ThreePointArc((-63.196075316, 7.07485149), (-64.946075316, 5.32485149), (-66.696075316, 7.07485149))
                Line((-66.696075316, 7.07485149), (-67.146075316, 7.07485149))
                Line((-67.146075316, 7.07485149), (-67.146075316, 3.07485149))
                Line((-67.146075316, 3.07485149), (-52.836540476, 3.07485149))
            make_face()
        extrude(amount=CUT_EXTRUDE4_DEPTH, mode=Mode.SUBTRACT)

    # Fillet1
    fillet1_edges = [part.edges().sort_by_distance(p)[0] for p in [
        (35.908924681, 1.5, 58.31514851),
        (27.908924681, 1.5, 58.31514851),
        (27.908924681, 1.5, -72.46485149),
        (35.908924681, 1.5, -72.46485149),
        (-67.146075316, 1.5, -3.07485149),
        (-67.146075316, 1.5, -11.07485149),
    ]]
    fillet(fillet1_edges, radius=FILLET1_R)

    # Fillet2
    fillet2_edges = [part.edges().sort_by_distance(p)[0] for p in [
        (35.908924681, 1.5, 43.657703147),
        (27.908924681, 1.5, 43.657703147),
        (27.908924681, 1.5, -57.807406127),
        (35.908924681, 1.5, -57.807406127),
        (-52.836540476, 1.5, -3.07485149),
        (-52.836540476, 1.5, -11.07485149),
    ]]
    fillet(fillet2_edges, radius=FILLET2_R)

    # Sketch2<23> → Cut-Extrude5 (cut)
    with SkipClean():  # the faces are left unmerged after this step: merging them gives an invalid solid
        with BuildSketch(Plane(origin=(0, 6, 0), x_dir=(1, 0, 0), z_dir=(0, 1, 0)).offset(CUT_EXTRUDE5_START)):
            with BuildLine():
                Line((93.738924678, 7.07485149), (82.798924681, 7.07485149))
                ThreePointArc((82.798924681, 7.07485149), (82.759548106, 5.073302775), (82.641479318, 3.07485149))
                Line((82.641479318, 3.07485149), (97.688924678, 3.07485149))
                Line((97.688924678, 3.07485149), (97.688924678, 7.07485149))
                Line((97.688924678, 7.07485149), (97.238924678, 7.07485149))
                ThreePointArc((97.238924678, 7.07485149), (95.488924678, 5.32485149), (93.738924678, 7.07485149))
            make_face()
            with BuildLine():
                Line((97.688924678, 11.07485149), (82.641479318, 11.07485149))
                ThreePointArc((82.641479318, 11.07485149), (82.759548106, 9.076400206), (82.798924681, 7.07485149))
                Line((82.798924681, 7.07485149), (93.738924678, 7.07485149))
                ThreePointArc((93.738924678, 7.07485149), (95.488924678, 8.82485149), (97.238924678, 7.07485149))
                Line((97.238924678, 7.07485149), (97.688924678, 7.07485149))
                Line((97.688924678, 7.07485149), (97.688924678, 11.07485149))
            make_face()
        extrude(amount=CUT_EXTRUDE5_DEPTH, mode=Mode.SUBTRACT)

    # Sketch1<6> → Cut-Extrude8 (cut)
    with SkipClean():  # the faces are left unmerged after this step: merging them gives an invalid solid
        with BuildSketch(Plane(origin=(0, 0, 0), x_dir=(1, 0, 0), z_dir=(0, 1, 0))):
            with Locations(Location((31.908924681, 7.07485149, 0), (0, 0, 270))):
                Circle(SKETCH1_6_R)
            with Locations((31.908924681, 7.07485149)):
                Circle(SKETCH1_6_R_2, mode=Mode.SUBTRACT)
        extrude(amount=CUT_EXTRUDE8_DEPTH, mode=Mode.SUBTRACT)


with BuildPart() as cut_extrude8_kept_piece:
    # of the separate pieces the step leaves, the one the design keeps (cut_extrude8_pieces_kept)
    add(part.part.solids().sort_by_distance((35.908924681, 0, -66.333539461))[0])


solid = cut_extrude8_kept_piece.part
